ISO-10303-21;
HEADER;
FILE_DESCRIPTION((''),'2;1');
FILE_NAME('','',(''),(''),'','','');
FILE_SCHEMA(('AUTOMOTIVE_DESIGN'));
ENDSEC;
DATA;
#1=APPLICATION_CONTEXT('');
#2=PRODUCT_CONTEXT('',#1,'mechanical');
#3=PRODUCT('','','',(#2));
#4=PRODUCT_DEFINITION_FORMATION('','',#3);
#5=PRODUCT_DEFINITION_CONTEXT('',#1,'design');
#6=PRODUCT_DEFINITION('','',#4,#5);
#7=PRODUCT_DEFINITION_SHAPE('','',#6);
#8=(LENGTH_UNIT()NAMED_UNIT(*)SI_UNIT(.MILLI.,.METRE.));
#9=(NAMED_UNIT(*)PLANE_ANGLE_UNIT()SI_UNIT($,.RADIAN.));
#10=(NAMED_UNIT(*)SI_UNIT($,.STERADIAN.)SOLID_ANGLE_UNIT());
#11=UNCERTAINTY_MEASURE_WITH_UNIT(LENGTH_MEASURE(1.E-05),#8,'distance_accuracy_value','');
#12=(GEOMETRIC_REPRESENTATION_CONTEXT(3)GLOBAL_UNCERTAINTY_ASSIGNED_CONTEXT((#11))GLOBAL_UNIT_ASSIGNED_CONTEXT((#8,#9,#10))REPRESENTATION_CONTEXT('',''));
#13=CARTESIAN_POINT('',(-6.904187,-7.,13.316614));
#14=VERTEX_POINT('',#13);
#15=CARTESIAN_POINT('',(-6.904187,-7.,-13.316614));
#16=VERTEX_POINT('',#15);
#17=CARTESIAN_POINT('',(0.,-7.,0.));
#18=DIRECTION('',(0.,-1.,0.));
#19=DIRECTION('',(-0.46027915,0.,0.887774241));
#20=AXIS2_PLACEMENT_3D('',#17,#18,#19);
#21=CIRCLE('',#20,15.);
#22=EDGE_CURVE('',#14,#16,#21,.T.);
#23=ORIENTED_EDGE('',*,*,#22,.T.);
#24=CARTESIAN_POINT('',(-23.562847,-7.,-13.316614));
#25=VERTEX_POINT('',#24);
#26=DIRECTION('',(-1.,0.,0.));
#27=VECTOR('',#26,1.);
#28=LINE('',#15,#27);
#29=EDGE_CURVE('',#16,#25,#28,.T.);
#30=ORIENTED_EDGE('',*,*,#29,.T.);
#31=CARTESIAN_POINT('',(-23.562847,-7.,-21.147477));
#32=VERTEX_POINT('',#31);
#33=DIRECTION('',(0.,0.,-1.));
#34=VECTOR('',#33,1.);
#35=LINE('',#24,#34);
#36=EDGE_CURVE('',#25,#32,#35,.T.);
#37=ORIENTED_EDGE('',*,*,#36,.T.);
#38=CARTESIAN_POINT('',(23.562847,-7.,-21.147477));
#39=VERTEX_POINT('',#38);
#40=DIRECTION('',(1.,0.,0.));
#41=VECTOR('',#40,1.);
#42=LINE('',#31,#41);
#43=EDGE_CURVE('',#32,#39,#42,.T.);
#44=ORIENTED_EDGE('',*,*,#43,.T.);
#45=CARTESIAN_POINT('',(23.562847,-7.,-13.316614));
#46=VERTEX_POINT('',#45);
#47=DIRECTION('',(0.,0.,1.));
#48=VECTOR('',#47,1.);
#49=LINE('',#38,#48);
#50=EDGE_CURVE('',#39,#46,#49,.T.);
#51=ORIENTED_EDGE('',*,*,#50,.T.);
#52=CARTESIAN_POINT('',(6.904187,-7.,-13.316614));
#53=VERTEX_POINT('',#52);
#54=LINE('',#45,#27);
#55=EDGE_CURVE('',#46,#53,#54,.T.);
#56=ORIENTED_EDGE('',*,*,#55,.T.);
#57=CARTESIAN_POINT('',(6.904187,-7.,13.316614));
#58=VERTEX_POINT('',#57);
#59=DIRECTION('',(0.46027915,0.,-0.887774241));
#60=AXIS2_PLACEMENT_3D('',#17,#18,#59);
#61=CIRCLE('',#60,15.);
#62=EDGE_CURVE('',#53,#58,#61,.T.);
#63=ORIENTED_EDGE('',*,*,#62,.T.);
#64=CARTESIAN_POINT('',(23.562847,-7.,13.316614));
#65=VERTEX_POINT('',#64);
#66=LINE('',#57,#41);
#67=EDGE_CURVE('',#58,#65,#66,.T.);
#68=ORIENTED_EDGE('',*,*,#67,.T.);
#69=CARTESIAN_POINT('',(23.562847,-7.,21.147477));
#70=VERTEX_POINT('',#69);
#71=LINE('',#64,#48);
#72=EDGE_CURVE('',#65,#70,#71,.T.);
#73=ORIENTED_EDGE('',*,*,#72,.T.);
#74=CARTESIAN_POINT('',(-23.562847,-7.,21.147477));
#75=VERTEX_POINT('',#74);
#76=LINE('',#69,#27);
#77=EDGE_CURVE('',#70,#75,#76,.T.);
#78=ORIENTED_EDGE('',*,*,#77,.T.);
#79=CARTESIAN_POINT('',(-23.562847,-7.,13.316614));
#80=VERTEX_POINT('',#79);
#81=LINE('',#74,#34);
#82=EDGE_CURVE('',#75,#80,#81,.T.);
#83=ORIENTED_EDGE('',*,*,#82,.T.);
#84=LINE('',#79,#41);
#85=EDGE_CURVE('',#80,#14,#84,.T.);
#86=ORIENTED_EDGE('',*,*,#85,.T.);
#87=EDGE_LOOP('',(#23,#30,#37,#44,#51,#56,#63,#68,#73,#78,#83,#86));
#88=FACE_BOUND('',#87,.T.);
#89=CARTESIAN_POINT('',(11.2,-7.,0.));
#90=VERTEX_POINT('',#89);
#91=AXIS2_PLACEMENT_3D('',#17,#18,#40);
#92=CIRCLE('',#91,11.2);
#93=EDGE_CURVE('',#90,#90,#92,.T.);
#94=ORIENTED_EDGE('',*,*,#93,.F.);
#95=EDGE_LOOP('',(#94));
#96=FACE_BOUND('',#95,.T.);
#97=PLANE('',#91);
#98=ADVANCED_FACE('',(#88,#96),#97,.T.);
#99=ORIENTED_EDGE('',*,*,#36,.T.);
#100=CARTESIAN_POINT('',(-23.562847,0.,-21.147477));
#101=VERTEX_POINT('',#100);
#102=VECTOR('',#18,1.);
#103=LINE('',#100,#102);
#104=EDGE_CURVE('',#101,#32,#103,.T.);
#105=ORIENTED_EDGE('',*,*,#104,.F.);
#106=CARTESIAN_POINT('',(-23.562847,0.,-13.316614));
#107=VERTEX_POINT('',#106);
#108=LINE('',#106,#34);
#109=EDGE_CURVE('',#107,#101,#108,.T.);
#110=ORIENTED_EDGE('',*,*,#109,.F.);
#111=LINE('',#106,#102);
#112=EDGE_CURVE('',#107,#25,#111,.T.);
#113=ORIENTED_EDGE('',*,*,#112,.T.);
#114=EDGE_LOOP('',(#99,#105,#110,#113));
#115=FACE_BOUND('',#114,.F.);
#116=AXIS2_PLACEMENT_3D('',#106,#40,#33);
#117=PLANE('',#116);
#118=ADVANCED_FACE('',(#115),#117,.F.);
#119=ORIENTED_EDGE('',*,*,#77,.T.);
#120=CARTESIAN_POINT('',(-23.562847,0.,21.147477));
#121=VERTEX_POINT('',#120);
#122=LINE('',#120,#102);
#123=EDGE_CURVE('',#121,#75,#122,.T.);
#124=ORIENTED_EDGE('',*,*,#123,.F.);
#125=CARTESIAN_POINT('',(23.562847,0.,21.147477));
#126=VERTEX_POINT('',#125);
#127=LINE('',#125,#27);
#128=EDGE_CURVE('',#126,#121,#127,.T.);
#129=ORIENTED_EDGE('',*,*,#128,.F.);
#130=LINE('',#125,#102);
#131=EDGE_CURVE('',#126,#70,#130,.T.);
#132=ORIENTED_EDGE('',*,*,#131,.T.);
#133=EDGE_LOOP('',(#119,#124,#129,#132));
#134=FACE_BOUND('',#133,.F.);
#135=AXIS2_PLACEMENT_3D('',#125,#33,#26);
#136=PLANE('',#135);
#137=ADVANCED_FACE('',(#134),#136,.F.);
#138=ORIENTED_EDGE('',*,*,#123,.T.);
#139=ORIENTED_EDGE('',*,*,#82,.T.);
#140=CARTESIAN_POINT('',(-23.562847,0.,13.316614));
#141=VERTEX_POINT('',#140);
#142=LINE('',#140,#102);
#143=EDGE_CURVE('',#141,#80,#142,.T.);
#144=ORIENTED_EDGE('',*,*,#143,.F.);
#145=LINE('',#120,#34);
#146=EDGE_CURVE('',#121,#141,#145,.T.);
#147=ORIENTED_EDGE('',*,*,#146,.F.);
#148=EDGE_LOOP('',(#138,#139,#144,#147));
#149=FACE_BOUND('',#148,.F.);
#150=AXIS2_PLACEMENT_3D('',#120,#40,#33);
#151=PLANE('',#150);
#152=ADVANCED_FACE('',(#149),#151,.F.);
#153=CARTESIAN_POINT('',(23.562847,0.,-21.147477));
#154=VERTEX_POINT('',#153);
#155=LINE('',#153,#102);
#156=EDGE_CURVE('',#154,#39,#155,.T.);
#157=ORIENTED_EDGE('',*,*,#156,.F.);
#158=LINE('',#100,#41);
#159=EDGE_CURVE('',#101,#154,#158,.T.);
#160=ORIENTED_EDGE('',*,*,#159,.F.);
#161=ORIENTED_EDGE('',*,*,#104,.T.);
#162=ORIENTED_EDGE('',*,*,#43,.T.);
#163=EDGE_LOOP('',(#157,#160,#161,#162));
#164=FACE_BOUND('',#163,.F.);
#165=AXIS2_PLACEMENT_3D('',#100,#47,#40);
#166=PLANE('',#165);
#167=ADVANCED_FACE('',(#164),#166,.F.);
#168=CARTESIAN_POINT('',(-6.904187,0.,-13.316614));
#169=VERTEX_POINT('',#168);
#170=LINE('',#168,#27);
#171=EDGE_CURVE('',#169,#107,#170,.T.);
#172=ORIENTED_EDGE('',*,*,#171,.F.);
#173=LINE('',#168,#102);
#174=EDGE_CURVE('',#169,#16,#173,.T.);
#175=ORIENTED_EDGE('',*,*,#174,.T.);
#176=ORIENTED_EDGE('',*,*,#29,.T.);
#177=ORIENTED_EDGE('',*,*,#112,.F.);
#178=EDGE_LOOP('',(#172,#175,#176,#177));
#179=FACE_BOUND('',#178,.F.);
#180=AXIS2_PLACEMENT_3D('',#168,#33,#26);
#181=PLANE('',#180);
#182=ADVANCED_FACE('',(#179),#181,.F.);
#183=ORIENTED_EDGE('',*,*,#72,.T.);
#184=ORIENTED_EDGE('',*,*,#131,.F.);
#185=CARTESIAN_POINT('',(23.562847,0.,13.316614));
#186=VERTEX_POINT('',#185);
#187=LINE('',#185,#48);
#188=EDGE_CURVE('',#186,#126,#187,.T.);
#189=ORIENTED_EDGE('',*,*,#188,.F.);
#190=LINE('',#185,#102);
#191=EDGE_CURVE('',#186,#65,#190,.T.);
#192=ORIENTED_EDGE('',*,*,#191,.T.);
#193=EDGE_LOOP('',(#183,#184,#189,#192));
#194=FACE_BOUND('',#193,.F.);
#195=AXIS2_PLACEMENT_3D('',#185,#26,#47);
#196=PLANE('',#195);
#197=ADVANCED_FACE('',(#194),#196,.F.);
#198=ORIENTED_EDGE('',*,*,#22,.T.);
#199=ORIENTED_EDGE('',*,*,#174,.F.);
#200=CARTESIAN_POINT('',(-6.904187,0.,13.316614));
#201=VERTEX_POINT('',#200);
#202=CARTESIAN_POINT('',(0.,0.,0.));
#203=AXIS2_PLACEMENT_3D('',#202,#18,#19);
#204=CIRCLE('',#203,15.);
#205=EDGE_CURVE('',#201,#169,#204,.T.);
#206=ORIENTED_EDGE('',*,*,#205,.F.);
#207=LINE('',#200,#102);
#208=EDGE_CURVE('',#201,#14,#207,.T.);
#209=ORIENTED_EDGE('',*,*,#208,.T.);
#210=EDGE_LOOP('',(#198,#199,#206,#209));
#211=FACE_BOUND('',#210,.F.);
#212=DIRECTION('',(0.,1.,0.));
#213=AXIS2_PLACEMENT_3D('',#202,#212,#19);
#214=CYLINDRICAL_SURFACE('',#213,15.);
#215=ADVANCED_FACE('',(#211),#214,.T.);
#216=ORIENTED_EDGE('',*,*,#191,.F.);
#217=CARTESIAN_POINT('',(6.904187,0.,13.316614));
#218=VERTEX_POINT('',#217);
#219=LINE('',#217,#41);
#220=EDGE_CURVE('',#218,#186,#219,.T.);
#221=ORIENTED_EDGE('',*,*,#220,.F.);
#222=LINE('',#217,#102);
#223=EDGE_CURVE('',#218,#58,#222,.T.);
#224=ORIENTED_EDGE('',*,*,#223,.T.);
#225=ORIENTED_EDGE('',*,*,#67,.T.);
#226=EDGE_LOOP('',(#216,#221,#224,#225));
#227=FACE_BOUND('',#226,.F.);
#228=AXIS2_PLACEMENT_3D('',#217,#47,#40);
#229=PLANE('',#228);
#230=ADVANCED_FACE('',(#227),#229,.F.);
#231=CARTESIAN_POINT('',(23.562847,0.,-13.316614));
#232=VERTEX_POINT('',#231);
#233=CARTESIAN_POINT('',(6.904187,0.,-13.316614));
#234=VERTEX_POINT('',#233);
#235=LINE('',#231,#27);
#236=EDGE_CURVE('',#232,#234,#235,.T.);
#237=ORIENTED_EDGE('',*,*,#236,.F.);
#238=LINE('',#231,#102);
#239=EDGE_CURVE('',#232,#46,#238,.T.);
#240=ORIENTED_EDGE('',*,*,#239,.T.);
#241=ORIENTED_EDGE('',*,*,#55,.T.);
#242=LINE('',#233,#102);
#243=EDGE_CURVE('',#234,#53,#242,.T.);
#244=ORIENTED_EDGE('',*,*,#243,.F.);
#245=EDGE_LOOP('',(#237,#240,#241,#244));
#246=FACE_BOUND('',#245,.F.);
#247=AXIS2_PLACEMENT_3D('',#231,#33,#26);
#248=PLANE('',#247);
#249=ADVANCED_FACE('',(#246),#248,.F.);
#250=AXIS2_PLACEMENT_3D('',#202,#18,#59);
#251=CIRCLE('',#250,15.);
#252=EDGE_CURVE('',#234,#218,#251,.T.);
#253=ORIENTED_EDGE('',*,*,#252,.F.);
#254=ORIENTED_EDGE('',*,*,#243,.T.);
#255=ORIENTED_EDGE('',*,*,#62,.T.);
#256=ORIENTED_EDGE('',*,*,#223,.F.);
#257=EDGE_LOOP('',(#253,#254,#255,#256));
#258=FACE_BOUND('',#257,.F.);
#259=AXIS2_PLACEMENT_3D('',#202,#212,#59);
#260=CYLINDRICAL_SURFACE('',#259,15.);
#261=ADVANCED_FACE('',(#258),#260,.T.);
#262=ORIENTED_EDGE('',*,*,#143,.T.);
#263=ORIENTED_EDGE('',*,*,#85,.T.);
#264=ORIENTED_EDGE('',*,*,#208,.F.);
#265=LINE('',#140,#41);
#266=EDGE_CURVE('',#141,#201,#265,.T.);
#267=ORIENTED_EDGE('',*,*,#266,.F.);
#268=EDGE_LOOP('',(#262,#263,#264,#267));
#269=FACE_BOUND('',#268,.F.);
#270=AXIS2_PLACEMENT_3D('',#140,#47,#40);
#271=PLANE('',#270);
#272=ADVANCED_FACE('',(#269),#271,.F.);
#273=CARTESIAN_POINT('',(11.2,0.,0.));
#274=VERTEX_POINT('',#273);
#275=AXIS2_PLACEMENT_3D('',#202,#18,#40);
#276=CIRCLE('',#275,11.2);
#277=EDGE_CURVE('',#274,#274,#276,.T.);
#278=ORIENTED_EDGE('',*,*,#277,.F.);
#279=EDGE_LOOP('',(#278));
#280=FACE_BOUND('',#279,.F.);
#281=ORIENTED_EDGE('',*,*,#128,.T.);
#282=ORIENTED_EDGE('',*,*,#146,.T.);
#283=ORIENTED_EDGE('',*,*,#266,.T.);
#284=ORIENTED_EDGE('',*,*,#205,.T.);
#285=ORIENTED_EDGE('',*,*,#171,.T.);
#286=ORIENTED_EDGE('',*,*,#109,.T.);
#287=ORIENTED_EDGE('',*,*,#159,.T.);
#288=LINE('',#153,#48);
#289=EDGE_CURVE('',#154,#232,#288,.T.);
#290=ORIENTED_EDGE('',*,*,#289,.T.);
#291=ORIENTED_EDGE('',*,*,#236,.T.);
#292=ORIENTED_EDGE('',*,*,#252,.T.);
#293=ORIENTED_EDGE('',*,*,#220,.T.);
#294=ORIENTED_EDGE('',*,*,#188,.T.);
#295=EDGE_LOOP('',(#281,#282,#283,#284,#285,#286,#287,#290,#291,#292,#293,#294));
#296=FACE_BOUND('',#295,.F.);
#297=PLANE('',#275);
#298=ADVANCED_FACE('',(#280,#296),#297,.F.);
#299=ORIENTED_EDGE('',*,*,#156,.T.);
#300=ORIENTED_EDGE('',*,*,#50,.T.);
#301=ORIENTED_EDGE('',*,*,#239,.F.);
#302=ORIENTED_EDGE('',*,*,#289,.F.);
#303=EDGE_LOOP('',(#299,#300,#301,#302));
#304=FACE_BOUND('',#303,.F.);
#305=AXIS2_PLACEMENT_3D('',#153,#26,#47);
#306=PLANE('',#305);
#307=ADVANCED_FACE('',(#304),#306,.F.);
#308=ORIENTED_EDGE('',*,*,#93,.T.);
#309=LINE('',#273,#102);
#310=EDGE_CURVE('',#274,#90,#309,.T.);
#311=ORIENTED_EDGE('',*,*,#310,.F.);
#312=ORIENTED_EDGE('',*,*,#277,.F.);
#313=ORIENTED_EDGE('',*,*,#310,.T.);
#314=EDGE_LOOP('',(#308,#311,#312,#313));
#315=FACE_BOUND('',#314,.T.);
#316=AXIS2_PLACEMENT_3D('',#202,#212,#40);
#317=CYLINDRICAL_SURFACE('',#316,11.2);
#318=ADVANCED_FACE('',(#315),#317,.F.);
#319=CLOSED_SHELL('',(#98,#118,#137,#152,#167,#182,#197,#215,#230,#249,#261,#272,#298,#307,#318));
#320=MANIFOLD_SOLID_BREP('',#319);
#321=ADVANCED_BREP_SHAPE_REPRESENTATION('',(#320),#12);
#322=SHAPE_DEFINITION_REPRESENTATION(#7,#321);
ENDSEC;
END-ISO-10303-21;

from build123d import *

# Parameters (mm, degrees)
F0_R     = 11.2
F1_DEPTH = 7


# Not quite as in the source:
# - a feature names something its author has since deleted; it is built from what else it names


with BuildPart() as f1:
    # F0 (on Front) → F1 (new body)
    with BuildSketch(Plane.XZ):
        with BuildLine():
            Line((-23.5628467053, 13.316613622), (-6.9041872543, 13.316613622))
            ThreePointArc((-6.9041872543, 13.316613622), (-15, 0), (-6.9041872543, -13.316613622))
            Line((-6.9041872543, -13.316613622), (-23.5628467053, -13.316613622))
            Line((-23.5628467053, -13.316613622), (-23.5628467053, -21.1474765092))
            Line((-23.5628467053, -21.1474765092), (0, -21.1474765092))
            Line((0, -21.1474765092), (23.5628467053, -21.1474765092))
            Line((23.5628467053, -21.1474765092), (23.5628467053, -13.316613622))
            Line((23.5628467053, -13.316613622), (6.9041872543, -13.316613622))
            ThreePointArc((6.9041872543, -13.316613622), (15, 0), (6.9041872543, 13.316613622))
            Line((6.9041872543, 13.316613622), (23.5628467053, 13.316613622))
            Line((23.5628467053, 13.316613622), (23.5628467053, 21.1474765092))
            Line((23.5628467053, 21.1474765092), (0, 21.1474765092))
            Line((0, 21.1474765092), (-23.5628467053, 21.1474765092))
            Line((-23.5628467053, 21.1474765092), (-23.5628467053, 13.316613622))
        make_face()
        Circle(F0_R, mode=Mode.SUBTRACT)
    extrude(amount=F1_DEPTH)


solid = f1.part
